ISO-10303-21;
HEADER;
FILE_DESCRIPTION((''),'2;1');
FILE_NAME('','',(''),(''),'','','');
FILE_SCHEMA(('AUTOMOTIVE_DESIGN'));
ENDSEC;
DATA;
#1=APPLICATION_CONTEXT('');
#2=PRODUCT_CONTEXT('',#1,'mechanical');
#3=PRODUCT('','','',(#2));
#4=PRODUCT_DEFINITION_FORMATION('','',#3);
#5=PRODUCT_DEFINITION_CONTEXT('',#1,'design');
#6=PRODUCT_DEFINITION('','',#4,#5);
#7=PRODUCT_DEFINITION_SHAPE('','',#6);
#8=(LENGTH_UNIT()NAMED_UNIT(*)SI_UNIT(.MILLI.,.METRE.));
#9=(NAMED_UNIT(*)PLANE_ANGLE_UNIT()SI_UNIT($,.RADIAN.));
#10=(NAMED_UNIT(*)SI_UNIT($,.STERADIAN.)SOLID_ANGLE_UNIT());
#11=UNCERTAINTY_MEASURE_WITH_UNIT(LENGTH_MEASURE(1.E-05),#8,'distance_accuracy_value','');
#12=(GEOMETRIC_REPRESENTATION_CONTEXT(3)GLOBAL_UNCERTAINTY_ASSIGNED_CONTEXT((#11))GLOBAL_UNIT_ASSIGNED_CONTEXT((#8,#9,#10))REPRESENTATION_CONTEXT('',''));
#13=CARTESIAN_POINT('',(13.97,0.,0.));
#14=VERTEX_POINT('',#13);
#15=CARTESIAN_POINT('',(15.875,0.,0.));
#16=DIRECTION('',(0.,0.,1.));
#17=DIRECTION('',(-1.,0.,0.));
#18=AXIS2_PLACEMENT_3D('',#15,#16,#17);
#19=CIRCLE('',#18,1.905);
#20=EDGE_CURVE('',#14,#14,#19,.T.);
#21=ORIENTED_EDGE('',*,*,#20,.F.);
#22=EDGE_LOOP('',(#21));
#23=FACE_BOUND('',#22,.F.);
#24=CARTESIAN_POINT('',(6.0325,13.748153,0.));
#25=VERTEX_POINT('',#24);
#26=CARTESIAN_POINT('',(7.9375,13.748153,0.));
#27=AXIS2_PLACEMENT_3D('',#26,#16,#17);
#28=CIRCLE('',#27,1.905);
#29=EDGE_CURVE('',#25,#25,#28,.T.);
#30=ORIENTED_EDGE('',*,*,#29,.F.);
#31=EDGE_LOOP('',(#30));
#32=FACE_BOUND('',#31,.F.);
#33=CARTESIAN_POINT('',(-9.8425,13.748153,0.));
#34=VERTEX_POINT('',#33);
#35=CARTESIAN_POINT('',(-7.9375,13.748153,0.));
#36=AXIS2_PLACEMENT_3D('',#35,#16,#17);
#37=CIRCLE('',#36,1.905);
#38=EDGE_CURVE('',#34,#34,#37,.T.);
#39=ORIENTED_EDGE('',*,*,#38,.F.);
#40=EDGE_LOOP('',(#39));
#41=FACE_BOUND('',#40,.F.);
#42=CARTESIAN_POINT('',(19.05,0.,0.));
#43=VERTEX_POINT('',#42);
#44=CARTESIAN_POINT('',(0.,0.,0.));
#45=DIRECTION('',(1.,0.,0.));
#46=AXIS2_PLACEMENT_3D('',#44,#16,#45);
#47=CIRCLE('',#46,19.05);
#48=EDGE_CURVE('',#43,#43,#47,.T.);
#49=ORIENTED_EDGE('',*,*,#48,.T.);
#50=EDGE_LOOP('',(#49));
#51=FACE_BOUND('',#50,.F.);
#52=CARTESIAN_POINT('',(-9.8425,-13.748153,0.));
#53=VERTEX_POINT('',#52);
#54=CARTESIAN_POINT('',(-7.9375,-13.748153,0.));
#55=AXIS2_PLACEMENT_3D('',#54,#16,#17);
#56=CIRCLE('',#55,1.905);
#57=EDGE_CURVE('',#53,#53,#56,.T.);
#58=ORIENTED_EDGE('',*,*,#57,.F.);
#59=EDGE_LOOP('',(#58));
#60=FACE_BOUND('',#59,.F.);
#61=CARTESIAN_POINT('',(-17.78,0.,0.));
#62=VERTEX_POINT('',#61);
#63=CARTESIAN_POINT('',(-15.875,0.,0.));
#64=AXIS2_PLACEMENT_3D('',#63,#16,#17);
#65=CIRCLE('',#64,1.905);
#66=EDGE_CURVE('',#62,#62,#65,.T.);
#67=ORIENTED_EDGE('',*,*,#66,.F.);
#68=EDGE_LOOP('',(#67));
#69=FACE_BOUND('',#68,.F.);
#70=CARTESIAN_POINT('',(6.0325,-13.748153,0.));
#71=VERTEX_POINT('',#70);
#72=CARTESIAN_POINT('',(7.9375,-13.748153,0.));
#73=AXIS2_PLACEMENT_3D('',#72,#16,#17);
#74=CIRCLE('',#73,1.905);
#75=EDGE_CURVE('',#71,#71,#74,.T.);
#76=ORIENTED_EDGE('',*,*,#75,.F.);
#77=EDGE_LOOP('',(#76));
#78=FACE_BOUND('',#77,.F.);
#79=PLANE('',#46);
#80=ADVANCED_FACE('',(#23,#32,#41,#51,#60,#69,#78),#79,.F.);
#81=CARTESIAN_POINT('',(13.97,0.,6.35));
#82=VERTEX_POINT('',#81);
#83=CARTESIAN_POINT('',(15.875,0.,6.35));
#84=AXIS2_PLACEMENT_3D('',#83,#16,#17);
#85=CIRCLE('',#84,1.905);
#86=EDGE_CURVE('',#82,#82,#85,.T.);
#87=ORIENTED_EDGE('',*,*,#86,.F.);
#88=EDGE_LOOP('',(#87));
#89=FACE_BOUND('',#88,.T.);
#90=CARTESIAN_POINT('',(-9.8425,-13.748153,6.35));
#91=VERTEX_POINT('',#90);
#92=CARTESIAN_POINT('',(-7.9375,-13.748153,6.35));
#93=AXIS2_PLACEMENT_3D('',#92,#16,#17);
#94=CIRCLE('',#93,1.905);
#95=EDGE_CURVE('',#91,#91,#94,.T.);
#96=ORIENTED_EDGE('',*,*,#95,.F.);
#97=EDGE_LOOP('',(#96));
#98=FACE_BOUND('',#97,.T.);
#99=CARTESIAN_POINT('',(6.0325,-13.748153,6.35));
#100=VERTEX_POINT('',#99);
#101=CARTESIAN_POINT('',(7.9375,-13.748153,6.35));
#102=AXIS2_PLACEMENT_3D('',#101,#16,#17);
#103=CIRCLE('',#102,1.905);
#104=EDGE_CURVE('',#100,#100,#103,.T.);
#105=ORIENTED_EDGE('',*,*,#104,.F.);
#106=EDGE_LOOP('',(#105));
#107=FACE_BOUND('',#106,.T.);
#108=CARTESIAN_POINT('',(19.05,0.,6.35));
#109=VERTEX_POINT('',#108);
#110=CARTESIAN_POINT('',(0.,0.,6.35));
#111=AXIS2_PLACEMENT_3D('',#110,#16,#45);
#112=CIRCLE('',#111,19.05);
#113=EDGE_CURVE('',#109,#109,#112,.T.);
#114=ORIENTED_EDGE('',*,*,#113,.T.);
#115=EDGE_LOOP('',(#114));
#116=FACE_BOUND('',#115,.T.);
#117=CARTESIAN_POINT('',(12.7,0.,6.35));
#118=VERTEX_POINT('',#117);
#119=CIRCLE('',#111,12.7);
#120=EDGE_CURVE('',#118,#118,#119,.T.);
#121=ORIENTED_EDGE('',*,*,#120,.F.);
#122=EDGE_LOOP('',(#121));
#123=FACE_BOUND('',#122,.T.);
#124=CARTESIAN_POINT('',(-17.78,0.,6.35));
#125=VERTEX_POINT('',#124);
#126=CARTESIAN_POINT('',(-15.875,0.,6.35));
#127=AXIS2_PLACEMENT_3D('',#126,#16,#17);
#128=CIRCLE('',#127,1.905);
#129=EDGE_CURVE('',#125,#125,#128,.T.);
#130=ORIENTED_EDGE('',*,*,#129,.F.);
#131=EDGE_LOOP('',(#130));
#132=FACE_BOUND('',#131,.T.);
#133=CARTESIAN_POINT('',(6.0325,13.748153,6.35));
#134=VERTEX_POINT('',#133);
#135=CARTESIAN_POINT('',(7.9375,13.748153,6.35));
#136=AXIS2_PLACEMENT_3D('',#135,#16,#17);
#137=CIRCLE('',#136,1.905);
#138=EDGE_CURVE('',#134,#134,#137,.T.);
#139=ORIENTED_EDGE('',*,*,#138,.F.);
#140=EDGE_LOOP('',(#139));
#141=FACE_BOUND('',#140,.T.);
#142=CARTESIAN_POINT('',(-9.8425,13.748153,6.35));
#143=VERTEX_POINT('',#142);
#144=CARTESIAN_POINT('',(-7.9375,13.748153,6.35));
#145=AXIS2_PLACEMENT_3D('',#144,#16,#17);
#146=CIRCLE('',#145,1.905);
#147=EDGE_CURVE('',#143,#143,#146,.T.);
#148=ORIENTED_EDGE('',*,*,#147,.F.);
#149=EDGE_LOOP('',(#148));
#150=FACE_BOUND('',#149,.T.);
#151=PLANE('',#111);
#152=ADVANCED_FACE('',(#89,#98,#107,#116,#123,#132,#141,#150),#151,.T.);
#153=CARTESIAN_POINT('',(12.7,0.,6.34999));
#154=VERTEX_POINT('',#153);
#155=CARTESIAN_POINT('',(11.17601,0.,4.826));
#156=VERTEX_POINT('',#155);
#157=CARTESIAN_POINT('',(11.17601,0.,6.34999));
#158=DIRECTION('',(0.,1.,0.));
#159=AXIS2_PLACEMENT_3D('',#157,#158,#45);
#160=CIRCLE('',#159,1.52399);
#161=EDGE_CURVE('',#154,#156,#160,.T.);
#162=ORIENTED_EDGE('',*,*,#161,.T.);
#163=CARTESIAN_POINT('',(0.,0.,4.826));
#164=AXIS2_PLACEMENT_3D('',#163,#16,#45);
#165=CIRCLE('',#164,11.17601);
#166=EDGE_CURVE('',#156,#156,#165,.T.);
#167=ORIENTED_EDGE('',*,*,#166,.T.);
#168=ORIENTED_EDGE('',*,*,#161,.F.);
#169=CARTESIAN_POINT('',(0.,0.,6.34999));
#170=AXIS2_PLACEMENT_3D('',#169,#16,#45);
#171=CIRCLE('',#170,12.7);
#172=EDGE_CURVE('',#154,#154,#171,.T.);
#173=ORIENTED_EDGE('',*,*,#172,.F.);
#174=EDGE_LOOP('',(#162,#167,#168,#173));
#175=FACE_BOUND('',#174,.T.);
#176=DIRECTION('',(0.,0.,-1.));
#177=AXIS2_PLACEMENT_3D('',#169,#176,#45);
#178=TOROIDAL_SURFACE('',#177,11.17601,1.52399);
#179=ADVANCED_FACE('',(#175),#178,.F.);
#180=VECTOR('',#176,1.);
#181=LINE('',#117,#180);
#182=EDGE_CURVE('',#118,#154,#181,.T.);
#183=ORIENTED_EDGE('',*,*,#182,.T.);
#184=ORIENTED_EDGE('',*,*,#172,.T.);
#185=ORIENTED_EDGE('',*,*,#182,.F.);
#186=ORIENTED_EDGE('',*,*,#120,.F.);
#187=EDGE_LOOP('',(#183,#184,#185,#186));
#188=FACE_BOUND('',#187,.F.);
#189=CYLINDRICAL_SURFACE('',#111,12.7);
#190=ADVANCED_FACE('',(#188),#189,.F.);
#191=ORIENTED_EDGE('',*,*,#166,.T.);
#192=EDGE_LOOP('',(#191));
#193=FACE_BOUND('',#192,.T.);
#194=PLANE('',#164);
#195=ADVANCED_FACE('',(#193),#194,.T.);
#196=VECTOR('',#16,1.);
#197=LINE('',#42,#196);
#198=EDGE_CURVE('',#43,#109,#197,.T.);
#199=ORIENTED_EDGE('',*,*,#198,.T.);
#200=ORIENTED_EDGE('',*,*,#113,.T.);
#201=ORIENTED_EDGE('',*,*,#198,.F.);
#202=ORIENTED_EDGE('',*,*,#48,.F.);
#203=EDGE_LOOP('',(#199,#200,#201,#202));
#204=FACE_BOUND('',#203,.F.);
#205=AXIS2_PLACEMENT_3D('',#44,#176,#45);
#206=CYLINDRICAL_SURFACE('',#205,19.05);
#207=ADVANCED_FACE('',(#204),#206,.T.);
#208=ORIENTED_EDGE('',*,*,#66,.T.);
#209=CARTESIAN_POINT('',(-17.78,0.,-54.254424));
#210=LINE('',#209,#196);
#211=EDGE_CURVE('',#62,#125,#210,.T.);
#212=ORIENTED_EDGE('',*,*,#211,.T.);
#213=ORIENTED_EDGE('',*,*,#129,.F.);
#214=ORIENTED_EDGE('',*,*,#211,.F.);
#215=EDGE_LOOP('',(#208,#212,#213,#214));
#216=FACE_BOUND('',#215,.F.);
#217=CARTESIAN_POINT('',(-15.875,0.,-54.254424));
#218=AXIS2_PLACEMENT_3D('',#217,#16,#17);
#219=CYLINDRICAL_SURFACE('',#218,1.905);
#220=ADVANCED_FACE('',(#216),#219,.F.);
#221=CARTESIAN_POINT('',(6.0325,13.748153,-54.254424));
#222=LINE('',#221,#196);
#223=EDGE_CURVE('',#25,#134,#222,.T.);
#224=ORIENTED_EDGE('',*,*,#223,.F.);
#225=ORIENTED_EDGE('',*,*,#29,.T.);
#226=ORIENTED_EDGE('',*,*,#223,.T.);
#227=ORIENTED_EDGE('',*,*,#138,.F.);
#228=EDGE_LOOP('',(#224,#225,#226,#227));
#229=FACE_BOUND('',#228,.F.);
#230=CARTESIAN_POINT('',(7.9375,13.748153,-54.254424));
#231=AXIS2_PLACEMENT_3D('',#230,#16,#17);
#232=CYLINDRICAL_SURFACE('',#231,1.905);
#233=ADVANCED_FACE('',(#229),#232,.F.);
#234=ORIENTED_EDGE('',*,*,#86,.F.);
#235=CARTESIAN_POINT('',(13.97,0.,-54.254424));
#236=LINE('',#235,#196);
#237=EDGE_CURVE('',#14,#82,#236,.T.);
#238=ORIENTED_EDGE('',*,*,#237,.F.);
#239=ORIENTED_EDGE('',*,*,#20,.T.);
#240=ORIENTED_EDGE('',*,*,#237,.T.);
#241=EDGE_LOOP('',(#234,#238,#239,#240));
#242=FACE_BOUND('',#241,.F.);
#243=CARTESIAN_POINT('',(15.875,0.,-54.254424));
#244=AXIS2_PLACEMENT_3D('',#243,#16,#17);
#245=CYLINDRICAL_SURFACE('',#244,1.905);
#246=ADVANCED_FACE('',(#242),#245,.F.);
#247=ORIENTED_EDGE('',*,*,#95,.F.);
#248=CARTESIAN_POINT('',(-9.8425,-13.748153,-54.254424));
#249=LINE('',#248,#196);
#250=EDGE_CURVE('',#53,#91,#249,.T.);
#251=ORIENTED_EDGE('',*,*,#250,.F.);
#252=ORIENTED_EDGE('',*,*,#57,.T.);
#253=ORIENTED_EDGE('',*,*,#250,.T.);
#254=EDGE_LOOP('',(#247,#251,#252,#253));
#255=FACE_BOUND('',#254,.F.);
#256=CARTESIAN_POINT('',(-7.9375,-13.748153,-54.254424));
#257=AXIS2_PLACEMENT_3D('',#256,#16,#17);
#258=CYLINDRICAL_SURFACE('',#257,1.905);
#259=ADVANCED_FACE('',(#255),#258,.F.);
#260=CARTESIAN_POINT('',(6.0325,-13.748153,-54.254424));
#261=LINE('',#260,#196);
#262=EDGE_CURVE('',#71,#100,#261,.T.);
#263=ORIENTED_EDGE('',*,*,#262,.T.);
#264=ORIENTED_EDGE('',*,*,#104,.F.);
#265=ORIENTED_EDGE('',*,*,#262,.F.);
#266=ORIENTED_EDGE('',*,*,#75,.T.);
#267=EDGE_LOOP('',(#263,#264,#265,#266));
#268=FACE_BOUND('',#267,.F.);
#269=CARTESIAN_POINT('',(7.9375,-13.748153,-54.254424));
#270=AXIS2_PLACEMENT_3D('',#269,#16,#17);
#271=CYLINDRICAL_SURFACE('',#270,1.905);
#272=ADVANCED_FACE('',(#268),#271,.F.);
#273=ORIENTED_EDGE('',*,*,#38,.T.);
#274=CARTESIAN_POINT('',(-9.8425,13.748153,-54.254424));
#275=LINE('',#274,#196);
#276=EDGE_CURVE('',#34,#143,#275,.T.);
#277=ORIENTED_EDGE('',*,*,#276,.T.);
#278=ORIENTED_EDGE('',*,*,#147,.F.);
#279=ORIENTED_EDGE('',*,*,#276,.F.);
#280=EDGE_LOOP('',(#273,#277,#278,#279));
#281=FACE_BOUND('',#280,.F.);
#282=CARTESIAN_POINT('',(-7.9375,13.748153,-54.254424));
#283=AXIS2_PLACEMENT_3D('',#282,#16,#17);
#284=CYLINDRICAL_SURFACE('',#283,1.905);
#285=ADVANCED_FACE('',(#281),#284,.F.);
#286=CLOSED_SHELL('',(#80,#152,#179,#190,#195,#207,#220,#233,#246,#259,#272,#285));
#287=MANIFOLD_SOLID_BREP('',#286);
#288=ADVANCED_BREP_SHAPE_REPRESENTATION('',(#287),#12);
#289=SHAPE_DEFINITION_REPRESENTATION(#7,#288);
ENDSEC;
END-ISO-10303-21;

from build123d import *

# Parameters (mm, degrees)
F0_R     = 19.05
F1_DEPTH = 6.35
F2_D     = 3.81
F3_R     = 12.7
F4_DEPTH = 1.524
F5_R     = 1.52399


# Not quite as in the source:
# - a fillet or chamfer is up to 0.001 mm smaller than in the source, because OpenCascade refuses the exact size


with BuildPart() as f1:
    # F0 (on Top) → F1 (new body)
    with BuildSketch(Plane.XY):
        Circle(F0_R)
    extrude(amount=F1_DEPTH)

    # F2 (through all)
    with Locations(Plane(origin=(0, 0, 0), x_dir=(1, 0, 0), z_dir=(0, 0, -1))):
        with Locations((7.9375, 13.7481532851), (-7.9375, 13.7481532851), (-15.875, 0), (-7.9375, -13.7481532851), (7.9375, -13.7481532851), (15.875, 0)):
            Hole(F2_D / 2)

    # F3 (on face) → F4 (cut)
    with BuildSketch(Plane.XY.offset(6.35)):
        Circle(F3_R)
    extrude(amount=-F4_DEPTH, mode=Mode.SUBTRACT)

    # F5 (radius 1.524 in the source; OpenCascade refuses exactly that, so slightly less here)
    f5_edges = [f1.edges().sort_by_distance(p)[0] for p in [
        (-12.7, 0, 4.826),
    ]]
    fillet(f5_edges, radius=F5_R)


solid = f1.part
